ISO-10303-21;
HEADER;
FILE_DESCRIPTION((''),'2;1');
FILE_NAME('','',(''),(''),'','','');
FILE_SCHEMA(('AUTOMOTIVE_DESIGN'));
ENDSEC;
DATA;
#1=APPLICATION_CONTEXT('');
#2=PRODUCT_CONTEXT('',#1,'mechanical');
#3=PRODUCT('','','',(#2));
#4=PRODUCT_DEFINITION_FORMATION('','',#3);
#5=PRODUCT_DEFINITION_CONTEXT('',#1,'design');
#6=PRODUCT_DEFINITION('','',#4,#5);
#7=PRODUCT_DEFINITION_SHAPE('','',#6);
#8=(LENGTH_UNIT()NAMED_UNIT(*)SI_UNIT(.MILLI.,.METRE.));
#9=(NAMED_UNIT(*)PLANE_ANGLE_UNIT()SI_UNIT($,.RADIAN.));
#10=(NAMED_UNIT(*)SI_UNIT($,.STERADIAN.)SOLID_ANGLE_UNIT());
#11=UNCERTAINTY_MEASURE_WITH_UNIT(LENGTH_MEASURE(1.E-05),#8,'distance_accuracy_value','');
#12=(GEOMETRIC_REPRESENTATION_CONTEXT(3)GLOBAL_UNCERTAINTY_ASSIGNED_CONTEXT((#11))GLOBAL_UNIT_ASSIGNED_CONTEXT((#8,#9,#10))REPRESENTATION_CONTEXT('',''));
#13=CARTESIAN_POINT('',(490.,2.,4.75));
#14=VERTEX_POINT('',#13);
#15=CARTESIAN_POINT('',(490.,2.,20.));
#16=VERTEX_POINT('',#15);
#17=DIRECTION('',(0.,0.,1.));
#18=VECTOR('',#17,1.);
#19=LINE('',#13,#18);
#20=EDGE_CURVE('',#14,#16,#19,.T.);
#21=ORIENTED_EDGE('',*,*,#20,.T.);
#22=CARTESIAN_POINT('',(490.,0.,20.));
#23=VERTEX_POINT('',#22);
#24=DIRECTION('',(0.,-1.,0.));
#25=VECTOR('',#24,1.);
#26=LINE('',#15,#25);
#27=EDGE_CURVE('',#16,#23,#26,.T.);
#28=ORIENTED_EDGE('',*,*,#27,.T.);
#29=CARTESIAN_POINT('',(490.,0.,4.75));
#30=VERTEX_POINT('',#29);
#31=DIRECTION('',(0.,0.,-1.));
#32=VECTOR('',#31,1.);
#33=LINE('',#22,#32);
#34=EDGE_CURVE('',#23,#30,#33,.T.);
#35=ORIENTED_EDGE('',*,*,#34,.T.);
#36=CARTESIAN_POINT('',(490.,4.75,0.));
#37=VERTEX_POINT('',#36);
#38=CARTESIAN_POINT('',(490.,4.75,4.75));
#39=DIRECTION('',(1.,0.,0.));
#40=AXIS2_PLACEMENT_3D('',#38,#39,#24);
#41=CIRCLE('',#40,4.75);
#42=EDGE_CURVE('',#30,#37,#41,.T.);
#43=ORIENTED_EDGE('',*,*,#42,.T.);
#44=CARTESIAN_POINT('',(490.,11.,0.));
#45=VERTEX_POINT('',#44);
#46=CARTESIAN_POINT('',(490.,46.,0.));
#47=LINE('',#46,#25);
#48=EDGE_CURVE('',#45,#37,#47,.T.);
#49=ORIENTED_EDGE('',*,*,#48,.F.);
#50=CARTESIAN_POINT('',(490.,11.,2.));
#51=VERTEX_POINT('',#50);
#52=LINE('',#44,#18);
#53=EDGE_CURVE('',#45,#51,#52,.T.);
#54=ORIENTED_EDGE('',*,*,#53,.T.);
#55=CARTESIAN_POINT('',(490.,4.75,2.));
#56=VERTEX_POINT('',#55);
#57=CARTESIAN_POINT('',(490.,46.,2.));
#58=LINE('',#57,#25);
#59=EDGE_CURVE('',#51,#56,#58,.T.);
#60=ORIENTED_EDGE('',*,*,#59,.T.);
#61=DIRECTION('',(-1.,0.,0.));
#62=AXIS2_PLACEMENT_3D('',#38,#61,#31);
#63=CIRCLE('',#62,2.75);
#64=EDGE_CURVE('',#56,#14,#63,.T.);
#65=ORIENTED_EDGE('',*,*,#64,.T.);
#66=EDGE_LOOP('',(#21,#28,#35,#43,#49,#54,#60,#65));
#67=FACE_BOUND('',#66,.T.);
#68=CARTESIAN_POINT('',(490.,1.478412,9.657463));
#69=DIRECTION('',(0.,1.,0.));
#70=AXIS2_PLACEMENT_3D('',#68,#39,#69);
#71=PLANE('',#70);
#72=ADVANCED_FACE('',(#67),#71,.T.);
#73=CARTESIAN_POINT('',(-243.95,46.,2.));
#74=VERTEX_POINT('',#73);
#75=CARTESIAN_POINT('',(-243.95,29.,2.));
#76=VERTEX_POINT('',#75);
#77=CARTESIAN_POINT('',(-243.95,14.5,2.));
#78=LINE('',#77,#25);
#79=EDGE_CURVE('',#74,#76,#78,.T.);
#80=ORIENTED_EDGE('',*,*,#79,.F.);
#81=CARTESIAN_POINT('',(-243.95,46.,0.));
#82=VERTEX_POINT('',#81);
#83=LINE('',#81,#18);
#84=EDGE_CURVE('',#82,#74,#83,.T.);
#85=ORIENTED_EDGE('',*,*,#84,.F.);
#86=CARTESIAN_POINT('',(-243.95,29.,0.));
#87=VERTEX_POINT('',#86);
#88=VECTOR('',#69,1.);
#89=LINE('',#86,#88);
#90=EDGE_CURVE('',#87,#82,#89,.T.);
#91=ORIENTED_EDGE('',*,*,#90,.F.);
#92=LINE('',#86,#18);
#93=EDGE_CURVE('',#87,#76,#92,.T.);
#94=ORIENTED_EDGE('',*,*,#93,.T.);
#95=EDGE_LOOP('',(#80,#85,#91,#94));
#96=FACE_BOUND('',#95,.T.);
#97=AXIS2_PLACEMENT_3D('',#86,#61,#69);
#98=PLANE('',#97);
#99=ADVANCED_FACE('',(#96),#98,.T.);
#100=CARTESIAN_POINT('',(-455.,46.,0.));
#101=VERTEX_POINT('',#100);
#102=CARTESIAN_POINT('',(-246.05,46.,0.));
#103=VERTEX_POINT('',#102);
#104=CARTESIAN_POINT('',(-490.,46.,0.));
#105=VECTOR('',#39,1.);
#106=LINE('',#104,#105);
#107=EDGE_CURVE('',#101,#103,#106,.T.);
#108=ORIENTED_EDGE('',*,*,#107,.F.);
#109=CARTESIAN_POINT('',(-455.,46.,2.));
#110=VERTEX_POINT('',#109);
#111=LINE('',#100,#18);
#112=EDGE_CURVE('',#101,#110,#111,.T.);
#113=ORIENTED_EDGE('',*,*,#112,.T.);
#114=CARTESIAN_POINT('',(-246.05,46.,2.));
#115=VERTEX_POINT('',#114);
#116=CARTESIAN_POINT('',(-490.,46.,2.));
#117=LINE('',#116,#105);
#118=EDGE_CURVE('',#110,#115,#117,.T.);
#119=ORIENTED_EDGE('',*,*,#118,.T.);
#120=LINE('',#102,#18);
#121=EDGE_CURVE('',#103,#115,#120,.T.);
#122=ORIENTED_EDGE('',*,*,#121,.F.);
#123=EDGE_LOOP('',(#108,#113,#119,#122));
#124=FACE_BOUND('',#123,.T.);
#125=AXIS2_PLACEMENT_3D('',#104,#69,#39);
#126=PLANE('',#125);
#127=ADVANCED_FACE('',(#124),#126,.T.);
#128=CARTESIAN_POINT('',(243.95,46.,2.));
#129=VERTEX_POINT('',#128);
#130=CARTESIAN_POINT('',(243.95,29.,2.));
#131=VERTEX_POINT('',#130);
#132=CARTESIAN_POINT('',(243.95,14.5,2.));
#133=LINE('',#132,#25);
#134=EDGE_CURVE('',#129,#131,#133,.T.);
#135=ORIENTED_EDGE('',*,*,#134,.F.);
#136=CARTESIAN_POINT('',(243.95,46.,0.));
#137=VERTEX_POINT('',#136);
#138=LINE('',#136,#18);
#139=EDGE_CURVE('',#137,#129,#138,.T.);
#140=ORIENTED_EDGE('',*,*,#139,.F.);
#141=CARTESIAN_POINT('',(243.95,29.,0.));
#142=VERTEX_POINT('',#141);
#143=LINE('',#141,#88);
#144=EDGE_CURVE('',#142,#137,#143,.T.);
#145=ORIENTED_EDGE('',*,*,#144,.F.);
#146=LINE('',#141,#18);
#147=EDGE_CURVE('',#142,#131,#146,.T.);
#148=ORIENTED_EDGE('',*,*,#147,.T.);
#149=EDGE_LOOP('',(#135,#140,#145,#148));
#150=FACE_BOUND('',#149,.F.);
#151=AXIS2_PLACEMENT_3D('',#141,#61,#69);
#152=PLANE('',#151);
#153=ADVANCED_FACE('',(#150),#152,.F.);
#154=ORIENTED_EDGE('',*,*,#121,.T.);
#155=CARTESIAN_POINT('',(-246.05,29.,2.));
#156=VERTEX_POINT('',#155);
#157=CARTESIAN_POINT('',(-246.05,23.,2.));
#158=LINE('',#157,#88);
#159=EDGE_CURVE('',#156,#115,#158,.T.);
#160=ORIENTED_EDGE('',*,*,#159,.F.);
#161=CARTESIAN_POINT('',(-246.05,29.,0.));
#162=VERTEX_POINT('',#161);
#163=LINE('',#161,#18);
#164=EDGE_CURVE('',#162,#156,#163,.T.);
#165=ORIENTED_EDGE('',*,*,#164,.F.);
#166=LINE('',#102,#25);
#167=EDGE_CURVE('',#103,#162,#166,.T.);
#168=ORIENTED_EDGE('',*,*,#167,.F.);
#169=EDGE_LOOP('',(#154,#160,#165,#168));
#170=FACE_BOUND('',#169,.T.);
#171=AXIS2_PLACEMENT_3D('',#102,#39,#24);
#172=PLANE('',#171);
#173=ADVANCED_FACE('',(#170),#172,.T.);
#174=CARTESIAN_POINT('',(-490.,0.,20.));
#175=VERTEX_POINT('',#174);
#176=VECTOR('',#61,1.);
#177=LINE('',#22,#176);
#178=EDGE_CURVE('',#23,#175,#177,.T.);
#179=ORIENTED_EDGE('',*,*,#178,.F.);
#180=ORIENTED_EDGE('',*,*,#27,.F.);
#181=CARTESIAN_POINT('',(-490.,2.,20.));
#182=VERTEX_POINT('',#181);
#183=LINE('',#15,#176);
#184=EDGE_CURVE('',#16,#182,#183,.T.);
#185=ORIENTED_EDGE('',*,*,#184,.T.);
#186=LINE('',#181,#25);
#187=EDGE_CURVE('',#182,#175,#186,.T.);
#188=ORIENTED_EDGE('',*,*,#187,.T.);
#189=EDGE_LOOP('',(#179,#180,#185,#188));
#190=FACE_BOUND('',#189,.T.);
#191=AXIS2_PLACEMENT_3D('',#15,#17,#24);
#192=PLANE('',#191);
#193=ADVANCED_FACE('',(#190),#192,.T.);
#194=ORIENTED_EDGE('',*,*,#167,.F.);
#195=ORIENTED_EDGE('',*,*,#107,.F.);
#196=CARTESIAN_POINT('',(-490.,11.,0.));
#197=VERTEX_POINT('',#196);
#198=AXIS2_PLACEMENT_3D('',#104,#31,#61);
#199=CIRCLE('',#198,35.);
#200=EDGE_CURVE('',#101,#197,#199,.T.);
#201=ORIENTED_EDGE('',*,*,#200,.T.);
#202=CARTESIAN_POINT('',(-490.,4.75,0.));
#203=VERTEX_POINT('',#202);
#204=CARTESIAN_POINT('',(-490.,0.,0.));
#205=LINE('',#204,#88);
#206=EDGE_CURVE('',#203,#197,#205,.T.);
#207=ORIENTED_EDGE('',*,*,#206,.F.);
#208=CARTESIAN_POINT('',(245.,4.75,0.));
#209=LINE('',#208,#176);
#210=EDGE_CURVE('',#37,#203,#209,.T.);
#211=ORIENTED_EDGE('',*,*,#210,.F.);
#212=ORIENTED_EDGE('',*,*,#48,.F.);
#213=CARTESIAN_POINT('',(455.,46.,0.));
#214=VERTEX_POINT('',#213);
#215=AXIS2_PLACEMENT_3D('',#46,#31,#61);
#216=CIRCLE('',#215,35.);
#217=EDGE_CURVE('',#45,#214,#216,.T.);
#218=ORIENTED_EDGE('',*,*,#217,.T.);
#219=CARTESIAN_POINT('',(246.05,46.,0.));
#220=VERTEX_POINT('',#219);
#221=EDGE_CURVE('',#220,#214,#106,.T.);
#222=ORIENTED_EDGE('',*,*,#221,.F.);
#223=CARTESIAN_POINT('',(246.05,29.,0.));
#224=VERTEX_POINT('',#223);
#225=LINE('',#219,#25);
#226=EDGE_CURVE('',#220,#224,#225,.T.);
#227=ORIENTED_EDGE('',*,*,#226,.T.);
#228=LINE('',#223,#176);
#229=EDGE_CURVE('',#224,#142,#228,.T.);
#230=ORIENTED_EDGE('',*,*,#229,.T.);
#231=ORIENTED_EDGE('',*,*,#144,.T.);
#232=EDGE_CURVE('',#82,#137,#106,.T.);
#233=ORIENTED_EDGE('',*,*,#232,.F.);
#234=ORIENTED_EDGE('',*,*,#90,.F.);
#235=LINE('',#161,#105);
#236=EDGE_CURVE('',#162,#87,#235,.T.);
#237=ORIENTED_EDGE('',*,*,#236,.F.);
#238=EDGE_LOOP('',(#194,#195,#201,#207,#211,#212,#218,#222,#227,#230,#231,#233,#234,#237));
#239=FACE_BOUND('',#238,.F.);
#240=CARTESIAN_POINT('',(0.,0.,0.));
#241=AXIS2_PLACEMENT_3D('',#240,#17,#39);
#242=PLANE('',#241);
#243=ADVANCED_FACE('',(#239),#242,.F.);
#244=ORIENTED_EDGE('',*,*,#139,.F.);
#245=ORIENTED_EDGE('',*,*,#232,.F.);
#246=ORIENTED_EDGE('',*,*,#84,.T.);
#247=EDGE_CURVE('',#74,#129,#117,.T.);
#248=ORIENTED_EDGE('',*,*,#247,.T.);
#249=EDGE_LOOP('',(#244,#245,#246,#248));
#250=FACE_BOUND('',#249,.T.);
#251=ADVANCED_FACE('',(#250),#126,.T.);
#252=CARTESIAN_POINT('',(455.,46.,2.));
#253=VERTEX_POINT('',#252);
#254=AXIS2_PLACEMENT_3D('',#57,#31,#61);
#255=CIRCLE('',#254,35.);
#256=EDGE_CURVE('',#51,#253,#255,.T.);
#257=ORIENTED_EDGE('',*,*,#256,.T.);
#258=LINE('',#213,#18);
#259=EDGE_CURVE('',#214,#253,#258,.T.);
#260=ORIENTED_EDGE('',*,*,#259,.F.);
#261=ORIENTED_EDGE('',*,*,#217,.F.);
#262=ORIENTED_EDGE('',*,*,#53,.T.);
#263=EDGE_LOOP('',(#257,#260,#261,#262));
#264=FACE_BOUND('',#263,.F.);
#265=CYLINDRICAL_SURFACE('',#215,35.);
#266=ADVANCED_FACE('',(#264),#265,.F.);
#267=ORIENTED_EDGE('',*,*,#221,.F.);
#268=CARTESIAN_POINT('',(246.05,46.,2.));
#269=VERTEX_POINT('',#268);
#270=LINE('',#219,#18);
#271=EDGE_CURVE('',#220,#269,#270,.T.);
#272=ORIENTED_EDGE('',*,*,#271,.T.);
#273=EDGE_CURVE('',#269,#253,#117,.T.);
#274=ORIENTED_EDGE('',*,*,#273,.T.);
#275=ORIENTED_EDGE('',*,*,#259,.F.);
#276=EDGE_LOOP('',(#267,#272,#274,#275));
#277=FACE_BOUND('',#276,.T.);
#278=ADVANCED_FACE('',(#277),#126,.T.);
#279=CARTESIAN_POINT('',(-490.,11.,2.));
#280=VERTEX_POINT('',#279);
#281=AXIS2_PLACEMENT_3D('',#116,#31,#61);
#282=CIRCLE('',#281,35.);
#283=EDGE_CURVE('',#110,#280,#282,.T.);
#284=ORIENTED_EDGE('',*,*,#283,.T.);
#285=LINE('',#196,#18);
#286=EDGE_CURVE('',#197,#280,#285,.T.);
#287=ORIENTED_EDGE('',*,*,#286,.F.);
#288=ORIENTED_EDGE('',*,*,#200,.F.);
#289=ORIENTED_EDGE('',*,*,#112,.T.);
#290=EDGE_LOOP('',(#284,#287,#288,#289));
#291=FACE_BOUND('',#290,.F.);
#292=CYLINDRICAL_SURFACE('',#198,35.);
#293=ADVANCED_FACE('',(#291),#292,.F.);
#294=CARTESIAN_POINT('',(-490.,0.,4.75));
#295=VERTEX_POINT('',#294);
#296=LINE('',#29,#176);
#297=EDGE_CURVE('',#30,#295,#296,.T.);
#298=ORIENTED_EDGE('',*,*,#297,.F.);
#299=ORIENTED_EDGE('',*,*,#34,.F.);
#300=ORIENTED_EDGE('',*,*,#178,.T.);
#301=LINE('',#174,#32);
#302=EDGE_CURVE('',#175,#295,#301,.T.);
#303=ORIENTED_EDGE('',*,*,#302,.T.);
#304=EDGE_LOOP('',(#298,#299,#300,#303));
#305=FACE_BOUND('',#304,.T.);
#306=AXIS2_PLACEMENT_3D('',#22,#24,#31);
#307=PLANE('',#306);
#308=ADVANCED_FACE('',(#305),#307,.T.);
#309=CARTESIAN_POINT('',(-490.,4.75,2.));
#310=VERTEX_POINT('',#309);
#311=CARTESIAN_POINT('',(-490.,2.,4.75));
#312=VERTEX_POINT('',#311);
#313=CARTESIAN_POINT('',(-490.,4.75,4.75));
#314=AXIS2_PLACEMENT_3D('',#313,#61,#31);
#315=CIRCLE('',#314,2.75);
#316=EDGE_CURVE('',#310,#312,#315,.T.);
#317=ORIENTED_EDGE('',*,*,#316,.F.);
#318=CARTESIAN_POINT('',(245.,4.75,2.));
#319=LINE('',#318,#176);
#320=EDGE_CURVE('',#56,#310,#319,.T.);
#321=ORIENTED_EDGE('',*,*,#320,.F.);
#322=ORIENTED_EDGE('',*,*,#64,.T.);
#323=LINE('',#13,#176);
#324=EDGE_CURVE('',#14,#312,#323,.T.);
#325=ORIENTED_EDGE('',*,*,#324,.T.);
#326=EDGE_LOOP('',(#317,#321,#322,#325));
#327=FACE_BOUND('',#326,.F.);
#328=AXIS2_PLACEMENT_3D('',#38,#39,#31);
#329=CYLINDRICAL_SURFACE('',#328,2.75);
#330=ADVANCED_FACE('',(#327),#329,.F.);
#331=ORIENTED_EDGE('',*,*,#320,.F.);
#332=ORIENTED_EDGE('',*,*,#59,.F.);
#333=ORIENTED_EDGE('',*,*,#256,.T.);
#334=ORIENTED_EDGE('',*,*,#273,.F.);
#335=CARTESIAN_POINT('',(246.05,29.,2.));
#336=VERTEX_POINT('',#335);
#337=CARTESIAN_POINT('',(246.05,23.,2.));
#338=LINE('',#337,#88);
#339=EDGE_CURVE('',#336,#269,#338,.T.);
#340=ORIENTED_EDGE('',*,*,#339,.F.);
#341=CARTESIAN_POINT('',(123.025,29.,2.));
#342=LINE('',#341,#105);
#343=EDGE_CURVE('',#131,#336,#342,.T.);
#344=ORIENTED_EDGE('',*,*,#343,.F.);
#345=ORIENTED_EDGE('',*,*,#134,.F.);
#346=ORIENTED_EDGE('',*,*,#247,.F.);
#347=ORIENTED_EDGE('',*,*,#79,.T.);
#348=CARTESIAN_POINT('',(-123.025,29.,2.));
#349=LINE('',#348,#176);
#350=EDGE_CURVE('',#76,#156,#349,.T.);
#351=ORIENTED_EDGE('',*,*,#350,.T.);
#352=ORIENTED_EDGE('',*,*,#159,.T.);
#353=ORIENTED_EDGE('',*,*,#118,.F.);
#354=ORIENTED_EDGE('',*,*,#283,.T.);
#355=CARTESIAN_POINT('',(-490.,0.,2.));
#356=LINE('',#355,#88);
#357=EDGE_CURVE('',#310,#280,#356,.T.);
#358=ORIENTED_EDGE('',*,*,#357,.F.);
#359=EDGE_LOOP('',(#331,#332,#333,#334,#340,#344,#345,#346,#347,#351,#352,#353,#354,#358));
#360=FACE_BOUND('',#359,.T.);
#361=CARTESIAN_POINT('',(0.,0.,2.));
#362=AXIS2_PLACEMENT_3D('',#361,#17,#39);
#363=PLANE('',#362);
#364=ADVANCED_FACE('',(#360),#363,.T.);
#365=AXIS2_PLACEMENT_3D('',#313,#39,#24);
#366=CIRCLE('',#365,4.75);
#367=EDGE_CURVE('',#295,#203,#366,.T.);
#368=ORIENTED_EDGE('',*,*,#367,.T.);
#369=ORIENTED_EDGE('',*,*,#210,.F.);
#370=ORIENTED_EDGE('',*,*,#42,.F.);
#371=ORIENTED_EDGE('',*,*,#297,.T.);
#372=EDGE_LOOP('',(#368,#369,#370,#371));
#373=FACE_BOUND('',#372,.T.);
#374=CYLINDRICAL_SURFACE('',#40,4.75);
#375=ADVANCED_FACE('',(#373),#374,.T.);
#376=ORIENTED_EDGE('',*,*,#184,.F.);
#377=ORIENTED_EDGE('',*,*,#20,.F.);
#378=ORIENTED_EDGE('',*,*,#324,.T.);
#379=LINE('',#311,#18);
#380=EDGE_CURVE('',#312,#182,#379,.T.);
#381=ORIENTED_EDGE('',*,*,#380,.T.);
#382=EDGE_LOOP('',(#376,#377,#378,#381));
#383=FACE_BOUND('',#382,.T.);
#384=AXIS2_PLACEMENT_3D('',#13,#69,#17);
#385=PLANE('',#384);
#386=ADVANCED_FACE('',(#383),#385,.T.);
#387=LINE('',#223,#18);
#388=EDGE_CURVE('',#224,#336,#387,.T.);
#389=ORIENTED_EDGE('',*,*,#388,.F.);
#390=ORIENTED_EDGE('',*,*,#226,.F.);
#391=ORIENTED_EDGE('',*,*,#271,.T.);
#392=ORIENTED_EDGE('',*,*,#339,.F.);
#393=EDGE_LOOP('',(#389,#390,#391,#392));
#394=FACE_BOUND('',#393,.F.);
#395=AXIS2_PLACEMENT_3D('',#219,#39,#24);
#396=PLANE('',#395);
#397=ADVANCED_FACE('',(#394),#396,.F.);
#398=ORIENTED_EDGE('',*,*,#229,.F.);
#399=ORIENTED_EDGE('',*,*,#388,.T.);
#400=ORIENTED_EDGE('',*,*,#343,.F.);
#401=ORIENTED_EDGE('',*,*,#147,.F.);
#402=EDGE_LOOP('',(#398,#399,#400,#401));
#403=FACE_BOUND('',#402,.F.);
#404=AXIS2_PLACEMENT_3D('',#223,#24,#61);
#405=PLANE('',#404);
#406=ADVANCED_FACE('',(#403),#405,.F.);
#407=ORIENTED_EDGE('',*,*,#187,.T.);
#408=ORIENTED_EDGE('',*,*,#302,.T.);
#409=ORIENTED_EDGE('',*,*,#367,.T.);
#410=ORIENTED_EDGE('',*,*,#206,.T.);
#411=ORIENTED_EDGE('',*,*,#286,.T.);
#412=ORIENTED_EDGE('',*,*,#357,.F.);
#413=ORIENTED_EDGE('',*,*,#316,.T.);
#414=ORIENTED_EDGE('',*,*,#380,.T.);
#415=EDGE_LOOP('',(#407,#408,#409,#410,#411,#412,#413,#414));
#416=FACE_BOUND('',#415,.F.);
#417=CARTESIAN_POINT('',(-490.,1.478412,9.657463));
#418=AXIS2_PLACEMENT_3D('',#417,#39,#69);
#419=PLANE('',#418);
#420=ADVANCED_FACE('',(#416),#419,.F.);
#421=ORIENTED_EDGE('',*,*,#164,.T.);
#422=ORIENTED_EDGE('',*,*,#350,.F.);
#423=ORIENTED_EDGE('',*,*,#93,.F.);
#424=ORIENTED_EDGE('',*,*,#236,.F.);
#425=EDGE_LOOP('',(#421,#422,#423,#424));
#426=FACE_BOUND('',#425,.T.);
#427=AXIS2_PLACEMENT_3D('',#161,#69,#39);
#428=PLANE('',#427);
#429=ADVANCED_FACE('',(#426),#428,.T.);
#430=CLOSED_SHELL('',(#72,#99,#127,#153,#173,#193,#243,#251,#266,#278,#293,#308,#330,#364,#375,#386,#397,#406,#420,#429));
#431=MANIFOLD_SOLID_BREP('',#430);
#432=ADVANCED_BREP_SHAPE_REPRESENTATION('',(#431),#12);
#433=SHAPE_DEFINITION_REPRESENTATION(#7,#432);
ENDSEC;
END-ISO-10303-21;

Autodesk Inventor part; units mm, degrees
ref_plane "YZ Plane" through (0, 0, 0) normal (1, 0, 0) x (0, 1, 0)
ref_plane "XZ Plane" through (0, 0, 0) normal (0, 1, 0) x (-1, 0, 0)
ref_plane "XY Plane" through (0, 0, 0) normal (0, 0, 1) x (1, 0, 0)
sketch "Sketch1" plane through (0, 0, 0) normal (0, 0, 1) x (1, 0, 0)
  line L0 (-490, 46) -> (490, 46)
  line L1 (490, 46) -> (490, 0)
  line L2 (490, 0) -> (-490, 0)
  line L3 (-490, 0) -> (-490, 46)
  point P0 (0, 0)
  point P1 (0, 0)
  dimension "d0" = 980
  dimension "d1" = 46
extrude "Plate1" add sketch "Sketch1" along normal blind 2
sketch "Sketch2" plane through (490, 2, 0) normal (0, -1, 0) x (1, 0, 0)
  line L0 (-980, 0) -> (0, 0)
  line L1 (0, 0) -> (0, 20)
  line L2 (0, 20) -> (-980, 20)
  line L3 (-980, 20) -> (-980, 0)
edge flange "Flange1" height 20 angle 90 thickness 2 bend radius 2.75 thickness toward (0, -1, 0) relief round relief width 2 relief depth 1 edges at (0, 0, 2) wall of the first edge with corners at (-490, 2, 0) (490, 2, 0) (490, 2, 20) (-490, 2, 20)
bend "Bend1"
corner "Corner1"
sketch "Sketch5" plane through (0, 0, 0) normal (0, 0, -1) x (-1, 0, 0)
  line L0 (490, 46) -> (-490, 46) projected
  line L1 (490, 0) -> (-490, 0) projected
  circle A0 centre (0, 46) radius 35
  line L2 (243.95, 46) -> (246.05, 46)
  line L3 (246.05, 46) -> (246.05, 29)
  line L4 (246.05, 29) -> (243.95, 29)
  line L5 (243.95, 29) -> (243.95, 46)
  line L6 (-243.95, 46) -> (-246.05, 46)
  line L7 (-246.05, 46) -> (-246.05, 29)
  line L8 (-246.05, 29) -> (-243.95, 29)
  line L9 (-243.95, 29) -> (-243.95, 46)
  line L10 (0, 46) -> (0, 0) construction
  line L11 (490, 0) -> (490, 46)
  line L12 (-490, 0) -> (-490, 46)
  circle A1 centre (-490, 46) radius 35
  circle A2 centre (490, 46) radius 35
  point P0 (0, 0)
  point P1 (245, 29)
  point P2 (-245, 29)
  point P3 (246.05, 46)
  point P4 (-35, 46)
  point P5 (35, 46)
  point P6 (-246.05, 46)
  point P7 (455, 46)
  point P8 (490, 11)
  point P9 (-490, 11)
  point P10 (-455, 46)
  dimension "d45" = 70
  dimension "d48" = 2.1
  dimension "d49" = 490
  dimension "d51" = 29
  dimension "d52" = 17
extrude "Extrusion1" cut sketch "Sketch5" against normal through all contours L3 L4 L5 L0 | L0 L11 A2 | L9 L8 L7 L0 | L12 L0 A1 picked at (473.6046, 29.6046) picked at (-466.9592, 43.4039)
sketch "Sketch9" plane through (0, 0, 2) normal (0, 0, 1) x (1, 0, 0)
  line L0 (448.2795, 24.3045) -> (448.2795, 12.3045) construction
  line L1 (448.2795, 12.3045) -> (248.2795, 12.3045) construction
  line L2 (248.2795, 12.3045) -> (248.2795, 24.3045) construction
  line L3 (248.2795, 24.3045) -> (448.2795, 24.3045) construction
  line L4 (-490, 46) -> (490, 46) projected
  point P0 (0, 0)
  point P1 (1.05, 68)
  point P2 (490, 46)
  point P3 (-490, 46)
  dimension "d40" = 200
  dimension "d41" = 12
mark "Mark2"
equation "\"d2\" = Thickness"
equation "\"d3\" = BendReliefWidth"
equation "\"d4\" = BendReliefDepth"
equation "\"d5\" = MinimumRemnant"
equation "\"d6\" = TransitionRadius"
equation "\"d9\" = BendRadius"
equation "\"d10\" = CornerReliefSize"
equation "\"d11\" = GapSize"
equation "\"d12\" = JacobiRadiusSize"
equation "\"BendReliefWidth\" = Thickness"
equation "\"BendReliefDepth\" = 0.5 * Thickness"
equation "\"CornerReliefSize\" = 4 * Thickness"
equation "\"MinimumRemnant\" = 2 * Thickness"
equation "\"TransitionRadius\" = BendRadius"
equation "\"JacobiRadiusSize\" = BendRadius"
equation "\"GapSize\" = Thickness"
equation "\"Thickness\" = 2"
equation "\"BendRadius\" = 2.75"
properties part number "MSC 307 stringer BOARD  ##" material "Stainless Steel"
